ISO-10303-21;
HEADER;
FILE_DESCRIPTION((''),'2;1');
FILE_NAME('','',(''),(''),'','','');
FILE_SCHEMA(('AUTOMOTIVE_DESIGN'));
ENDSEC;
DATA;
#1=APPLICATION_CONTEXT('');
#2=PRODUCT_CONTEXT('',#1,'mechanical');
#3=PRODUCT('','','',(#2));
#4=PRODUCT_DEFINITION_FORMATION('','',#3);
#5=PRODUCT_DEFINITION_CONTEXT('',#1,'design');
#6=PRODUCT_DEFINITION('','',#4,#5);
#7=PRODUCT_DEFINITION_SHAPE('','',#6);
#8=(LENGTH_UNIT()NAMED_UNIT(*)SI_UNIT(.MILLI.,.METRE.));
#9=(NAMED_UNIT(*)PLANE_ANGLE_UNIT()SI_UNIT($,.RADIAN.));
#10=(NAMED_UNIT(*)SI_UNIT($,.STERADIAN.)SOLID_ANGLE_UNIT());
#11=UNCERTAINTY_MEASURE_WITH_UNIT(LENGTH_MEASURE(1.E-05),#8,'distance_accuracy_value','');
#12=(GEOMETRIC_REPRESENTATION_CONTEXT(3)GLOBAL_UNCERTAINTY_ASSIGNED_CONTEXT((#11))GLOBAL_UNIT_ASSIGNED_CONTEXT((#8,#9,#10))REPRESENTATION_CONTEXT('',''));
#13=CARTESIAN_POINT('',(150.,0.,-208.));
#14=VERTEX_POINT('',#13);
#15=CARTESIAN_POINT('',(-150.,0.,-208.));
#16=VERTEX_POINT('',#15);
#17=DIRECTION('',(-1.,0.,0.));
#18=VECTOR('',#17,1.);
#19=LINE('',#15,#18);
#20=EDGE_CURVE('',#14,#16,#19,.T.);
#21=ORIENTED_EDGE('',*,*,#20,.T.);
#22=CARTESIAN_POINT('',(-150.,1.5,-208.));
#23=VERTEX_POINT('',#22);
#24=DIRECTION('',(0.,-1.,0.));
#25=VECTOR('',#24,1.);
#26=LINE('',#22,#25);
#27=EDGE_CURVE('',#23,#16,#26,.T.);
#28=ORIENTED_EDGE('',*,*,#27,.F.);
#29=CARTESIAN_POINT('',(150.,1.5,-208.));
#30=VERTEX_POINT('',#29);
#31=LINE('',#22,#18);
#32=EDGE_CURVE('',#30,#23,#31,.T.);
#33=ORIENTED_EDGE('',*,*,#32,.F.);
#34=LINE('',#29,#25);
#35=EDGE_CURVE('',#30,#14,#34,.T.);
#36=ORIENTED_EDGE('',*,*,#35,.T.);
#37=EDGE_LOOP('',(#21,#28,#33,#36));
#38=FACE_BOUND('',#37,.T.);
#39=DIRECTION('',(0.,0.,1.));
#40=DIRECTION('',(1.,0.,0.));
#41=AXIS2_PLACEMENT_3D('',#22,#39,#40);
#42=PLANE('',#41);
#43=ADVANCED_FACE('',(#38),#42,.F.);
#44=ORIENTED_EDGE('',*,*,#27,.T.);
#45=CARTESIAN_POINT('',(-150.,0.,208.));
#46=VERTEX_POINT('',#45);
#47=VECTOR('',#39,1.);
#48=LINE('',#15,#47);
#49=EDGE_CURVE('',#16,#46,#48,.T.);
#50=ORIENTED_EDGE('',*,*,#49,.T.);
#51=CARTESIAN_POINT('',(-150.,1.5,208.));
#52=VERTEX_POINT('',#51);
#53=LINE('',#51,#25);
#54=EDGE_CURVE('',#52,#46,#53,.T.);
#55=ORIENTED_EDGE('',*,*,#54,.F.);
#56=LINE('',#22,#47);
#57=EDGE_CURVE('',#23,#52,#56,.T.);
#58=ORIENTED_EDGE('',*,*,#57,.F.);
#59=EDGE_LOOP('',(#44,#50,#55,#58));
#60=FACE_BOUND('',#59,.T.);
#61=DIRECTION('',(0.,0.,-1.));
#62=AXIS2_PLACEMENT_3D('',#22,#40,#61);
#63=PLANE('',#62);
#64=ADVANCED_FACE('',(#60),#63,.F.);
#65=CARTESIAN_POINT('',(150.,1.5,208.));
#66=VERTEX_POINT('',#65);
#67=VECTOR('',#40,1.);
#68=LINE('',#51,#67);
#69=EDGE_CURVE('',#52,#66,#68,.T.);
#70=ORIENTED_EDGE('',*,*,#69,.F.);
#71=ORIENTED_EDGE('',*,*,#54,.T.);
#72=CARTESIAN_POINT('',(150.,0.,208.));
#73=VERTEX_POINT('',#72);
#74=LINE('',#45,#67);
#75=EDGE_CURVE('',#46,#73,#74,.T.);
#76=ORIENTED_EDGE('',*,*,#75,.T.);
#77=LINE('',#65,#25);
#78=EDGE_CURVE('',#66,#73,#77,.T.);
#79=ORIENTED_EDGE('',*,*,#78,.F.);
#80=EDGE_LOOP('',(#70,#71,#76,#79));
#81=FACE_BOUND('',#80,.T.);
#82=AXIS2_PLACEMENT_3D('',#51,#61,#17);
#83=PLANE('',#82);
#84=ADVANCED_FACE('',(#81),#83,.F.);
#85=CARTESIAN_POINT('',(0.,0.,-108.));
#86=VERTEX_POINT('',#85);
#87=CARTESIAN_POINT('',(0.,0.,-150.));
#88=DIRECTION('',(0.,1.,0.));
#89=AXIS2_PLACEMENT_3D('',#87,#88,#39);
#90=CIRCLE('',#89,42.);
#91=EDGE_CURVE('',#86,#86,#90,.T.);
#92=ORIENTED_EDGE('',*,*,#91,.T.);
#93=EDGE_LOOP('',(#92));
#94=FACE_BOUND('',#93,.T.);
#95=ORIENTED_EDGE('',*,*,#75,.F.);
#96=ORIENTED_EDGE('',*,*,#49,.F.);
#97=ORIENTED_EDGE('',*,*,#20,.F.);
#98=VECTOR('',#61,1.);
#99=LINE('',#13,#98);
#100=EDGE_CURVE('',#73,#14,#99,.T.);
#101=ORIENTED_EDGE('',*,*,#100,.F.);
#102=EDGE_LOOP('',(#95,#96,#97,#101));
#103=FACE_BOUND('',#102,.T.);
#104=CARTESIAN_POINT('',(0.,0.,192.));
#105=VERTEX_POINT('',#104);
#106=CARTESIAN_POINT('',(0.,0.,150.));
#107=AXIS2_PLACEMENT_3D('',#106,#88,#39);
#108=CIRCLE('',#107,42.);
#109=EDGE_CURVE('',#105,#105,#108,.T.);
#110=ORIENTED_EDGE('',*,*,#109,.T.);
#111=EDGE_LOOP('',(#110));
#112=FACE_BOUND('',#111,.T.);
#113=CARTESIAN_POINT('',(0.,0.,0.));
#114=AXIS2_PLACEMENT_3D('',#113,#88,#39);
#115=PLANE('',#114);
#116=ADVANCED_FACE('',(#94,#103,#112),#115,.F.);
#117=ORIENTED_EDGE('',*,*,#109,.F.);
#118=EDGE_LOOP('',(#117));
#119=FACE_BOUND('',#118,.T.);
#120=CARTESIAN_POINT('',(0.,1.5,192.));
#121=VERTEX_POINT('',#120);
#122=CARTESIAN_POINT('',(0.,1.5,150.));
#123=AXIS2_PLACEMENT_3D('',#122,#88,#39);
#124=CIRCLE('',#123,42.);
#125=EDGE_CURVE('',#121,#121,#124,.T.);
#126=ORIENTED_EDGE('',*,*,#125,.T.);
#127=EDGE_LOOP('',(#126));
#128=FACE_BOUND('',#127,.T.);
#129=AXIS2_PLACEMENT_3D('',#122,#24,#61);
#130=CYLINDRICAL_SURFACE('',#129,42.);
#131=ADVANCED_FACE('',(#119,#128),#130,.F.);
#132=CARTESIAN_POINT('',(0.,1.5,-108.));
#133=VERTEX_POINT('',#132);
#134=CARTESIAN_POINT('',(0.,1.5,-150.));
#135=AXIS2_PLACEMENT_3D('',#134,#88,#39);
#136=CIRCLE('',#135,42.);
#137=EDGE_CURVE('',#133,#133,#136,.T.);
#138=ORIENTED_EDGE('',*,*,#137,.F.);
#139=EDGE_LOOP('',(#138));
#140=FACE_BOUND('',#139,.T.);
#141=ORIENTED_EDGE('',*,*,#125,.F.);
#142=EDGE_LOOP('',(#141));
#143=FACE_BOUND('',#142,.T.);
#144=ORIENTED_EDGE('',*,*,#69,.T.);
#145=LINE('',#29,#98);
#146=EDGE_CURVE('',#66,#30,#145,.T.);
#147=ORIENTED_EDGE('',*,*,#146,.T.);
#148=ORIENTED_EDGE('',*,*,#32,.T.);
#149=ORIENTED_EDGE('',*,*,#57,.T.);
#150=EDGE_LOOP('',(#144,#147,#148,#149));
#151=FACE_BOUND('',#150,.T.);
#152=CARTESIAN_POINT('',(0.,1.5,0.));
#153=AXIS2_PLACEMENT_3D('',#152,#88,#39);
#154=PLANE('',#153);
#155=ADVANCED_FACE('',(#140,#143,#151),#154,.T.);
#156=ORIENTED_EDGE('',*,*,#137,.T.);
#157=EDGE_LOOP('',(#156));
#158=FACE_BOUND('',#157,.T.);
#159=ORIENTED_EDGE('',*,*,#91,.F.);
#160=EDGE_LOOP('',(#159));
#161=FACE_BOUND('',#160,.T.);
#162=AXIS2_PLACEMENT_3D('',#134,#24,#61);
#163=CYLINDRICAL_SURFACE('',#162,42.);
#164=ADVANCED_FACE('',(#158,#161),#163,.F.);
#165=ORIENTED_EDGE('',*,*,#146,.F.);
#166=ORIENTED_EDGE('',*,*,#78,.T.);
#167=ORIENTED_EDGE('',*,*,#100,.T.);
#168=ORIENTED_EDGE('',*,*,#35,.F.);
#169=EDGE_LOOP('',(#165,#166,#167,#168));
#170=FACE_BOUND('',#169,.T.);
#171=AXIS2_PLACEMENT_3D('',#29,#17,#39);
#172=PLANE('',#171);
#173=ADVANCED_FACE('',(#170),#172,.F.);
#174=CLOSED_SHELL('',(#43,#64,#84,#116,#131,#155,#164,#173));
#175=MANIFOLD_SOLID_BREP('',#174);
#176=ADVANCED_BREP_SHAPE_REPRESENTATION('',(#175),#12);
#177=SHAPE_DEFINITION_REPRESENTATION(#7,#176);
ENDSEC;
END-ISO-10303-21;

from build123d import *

# Parameters (mm, degrees)
SK_PAN_W        = 300
SK_PAN_H        = 416
SM_PAN_DEPTH    = 1.5
SK_HOLES_R      = 42
CUT_HOLES_DEPTH = 1.5


# Sheet-metal steps are written as plain solids
with BuildPart() as part:
    # SK_Pan → SM_Pan (new body)
    with BuildSketch(Plane(origin=(0, 0, 0), x_dir=(1, 0, 0), z_dir=(0, 1, 0))):
        Rectangle(SK_PAN_W, SK_PAN_H)
    extrude(amount=SM_PAN_DEPTH)

    # SK_Holes → CUT_Holes (cut)
    with BuildSketch(Plane(origin=(0, 0, 0), x_dir=(1, 0, 0), z_dir=(0, 1, 0))):
        with Locations(Location((0, -150, 0), (0, 0, 270))):
            Circle(SK_HOLES_R)
        with Locations(Location((0, 150, 0), (0, 0, 270))):
            Circle(SK_HOLES_R)
    extrude(amount=CUT_HOLES_DEPTH, mode=Mode.SUBTRACT)


solid = part.part
